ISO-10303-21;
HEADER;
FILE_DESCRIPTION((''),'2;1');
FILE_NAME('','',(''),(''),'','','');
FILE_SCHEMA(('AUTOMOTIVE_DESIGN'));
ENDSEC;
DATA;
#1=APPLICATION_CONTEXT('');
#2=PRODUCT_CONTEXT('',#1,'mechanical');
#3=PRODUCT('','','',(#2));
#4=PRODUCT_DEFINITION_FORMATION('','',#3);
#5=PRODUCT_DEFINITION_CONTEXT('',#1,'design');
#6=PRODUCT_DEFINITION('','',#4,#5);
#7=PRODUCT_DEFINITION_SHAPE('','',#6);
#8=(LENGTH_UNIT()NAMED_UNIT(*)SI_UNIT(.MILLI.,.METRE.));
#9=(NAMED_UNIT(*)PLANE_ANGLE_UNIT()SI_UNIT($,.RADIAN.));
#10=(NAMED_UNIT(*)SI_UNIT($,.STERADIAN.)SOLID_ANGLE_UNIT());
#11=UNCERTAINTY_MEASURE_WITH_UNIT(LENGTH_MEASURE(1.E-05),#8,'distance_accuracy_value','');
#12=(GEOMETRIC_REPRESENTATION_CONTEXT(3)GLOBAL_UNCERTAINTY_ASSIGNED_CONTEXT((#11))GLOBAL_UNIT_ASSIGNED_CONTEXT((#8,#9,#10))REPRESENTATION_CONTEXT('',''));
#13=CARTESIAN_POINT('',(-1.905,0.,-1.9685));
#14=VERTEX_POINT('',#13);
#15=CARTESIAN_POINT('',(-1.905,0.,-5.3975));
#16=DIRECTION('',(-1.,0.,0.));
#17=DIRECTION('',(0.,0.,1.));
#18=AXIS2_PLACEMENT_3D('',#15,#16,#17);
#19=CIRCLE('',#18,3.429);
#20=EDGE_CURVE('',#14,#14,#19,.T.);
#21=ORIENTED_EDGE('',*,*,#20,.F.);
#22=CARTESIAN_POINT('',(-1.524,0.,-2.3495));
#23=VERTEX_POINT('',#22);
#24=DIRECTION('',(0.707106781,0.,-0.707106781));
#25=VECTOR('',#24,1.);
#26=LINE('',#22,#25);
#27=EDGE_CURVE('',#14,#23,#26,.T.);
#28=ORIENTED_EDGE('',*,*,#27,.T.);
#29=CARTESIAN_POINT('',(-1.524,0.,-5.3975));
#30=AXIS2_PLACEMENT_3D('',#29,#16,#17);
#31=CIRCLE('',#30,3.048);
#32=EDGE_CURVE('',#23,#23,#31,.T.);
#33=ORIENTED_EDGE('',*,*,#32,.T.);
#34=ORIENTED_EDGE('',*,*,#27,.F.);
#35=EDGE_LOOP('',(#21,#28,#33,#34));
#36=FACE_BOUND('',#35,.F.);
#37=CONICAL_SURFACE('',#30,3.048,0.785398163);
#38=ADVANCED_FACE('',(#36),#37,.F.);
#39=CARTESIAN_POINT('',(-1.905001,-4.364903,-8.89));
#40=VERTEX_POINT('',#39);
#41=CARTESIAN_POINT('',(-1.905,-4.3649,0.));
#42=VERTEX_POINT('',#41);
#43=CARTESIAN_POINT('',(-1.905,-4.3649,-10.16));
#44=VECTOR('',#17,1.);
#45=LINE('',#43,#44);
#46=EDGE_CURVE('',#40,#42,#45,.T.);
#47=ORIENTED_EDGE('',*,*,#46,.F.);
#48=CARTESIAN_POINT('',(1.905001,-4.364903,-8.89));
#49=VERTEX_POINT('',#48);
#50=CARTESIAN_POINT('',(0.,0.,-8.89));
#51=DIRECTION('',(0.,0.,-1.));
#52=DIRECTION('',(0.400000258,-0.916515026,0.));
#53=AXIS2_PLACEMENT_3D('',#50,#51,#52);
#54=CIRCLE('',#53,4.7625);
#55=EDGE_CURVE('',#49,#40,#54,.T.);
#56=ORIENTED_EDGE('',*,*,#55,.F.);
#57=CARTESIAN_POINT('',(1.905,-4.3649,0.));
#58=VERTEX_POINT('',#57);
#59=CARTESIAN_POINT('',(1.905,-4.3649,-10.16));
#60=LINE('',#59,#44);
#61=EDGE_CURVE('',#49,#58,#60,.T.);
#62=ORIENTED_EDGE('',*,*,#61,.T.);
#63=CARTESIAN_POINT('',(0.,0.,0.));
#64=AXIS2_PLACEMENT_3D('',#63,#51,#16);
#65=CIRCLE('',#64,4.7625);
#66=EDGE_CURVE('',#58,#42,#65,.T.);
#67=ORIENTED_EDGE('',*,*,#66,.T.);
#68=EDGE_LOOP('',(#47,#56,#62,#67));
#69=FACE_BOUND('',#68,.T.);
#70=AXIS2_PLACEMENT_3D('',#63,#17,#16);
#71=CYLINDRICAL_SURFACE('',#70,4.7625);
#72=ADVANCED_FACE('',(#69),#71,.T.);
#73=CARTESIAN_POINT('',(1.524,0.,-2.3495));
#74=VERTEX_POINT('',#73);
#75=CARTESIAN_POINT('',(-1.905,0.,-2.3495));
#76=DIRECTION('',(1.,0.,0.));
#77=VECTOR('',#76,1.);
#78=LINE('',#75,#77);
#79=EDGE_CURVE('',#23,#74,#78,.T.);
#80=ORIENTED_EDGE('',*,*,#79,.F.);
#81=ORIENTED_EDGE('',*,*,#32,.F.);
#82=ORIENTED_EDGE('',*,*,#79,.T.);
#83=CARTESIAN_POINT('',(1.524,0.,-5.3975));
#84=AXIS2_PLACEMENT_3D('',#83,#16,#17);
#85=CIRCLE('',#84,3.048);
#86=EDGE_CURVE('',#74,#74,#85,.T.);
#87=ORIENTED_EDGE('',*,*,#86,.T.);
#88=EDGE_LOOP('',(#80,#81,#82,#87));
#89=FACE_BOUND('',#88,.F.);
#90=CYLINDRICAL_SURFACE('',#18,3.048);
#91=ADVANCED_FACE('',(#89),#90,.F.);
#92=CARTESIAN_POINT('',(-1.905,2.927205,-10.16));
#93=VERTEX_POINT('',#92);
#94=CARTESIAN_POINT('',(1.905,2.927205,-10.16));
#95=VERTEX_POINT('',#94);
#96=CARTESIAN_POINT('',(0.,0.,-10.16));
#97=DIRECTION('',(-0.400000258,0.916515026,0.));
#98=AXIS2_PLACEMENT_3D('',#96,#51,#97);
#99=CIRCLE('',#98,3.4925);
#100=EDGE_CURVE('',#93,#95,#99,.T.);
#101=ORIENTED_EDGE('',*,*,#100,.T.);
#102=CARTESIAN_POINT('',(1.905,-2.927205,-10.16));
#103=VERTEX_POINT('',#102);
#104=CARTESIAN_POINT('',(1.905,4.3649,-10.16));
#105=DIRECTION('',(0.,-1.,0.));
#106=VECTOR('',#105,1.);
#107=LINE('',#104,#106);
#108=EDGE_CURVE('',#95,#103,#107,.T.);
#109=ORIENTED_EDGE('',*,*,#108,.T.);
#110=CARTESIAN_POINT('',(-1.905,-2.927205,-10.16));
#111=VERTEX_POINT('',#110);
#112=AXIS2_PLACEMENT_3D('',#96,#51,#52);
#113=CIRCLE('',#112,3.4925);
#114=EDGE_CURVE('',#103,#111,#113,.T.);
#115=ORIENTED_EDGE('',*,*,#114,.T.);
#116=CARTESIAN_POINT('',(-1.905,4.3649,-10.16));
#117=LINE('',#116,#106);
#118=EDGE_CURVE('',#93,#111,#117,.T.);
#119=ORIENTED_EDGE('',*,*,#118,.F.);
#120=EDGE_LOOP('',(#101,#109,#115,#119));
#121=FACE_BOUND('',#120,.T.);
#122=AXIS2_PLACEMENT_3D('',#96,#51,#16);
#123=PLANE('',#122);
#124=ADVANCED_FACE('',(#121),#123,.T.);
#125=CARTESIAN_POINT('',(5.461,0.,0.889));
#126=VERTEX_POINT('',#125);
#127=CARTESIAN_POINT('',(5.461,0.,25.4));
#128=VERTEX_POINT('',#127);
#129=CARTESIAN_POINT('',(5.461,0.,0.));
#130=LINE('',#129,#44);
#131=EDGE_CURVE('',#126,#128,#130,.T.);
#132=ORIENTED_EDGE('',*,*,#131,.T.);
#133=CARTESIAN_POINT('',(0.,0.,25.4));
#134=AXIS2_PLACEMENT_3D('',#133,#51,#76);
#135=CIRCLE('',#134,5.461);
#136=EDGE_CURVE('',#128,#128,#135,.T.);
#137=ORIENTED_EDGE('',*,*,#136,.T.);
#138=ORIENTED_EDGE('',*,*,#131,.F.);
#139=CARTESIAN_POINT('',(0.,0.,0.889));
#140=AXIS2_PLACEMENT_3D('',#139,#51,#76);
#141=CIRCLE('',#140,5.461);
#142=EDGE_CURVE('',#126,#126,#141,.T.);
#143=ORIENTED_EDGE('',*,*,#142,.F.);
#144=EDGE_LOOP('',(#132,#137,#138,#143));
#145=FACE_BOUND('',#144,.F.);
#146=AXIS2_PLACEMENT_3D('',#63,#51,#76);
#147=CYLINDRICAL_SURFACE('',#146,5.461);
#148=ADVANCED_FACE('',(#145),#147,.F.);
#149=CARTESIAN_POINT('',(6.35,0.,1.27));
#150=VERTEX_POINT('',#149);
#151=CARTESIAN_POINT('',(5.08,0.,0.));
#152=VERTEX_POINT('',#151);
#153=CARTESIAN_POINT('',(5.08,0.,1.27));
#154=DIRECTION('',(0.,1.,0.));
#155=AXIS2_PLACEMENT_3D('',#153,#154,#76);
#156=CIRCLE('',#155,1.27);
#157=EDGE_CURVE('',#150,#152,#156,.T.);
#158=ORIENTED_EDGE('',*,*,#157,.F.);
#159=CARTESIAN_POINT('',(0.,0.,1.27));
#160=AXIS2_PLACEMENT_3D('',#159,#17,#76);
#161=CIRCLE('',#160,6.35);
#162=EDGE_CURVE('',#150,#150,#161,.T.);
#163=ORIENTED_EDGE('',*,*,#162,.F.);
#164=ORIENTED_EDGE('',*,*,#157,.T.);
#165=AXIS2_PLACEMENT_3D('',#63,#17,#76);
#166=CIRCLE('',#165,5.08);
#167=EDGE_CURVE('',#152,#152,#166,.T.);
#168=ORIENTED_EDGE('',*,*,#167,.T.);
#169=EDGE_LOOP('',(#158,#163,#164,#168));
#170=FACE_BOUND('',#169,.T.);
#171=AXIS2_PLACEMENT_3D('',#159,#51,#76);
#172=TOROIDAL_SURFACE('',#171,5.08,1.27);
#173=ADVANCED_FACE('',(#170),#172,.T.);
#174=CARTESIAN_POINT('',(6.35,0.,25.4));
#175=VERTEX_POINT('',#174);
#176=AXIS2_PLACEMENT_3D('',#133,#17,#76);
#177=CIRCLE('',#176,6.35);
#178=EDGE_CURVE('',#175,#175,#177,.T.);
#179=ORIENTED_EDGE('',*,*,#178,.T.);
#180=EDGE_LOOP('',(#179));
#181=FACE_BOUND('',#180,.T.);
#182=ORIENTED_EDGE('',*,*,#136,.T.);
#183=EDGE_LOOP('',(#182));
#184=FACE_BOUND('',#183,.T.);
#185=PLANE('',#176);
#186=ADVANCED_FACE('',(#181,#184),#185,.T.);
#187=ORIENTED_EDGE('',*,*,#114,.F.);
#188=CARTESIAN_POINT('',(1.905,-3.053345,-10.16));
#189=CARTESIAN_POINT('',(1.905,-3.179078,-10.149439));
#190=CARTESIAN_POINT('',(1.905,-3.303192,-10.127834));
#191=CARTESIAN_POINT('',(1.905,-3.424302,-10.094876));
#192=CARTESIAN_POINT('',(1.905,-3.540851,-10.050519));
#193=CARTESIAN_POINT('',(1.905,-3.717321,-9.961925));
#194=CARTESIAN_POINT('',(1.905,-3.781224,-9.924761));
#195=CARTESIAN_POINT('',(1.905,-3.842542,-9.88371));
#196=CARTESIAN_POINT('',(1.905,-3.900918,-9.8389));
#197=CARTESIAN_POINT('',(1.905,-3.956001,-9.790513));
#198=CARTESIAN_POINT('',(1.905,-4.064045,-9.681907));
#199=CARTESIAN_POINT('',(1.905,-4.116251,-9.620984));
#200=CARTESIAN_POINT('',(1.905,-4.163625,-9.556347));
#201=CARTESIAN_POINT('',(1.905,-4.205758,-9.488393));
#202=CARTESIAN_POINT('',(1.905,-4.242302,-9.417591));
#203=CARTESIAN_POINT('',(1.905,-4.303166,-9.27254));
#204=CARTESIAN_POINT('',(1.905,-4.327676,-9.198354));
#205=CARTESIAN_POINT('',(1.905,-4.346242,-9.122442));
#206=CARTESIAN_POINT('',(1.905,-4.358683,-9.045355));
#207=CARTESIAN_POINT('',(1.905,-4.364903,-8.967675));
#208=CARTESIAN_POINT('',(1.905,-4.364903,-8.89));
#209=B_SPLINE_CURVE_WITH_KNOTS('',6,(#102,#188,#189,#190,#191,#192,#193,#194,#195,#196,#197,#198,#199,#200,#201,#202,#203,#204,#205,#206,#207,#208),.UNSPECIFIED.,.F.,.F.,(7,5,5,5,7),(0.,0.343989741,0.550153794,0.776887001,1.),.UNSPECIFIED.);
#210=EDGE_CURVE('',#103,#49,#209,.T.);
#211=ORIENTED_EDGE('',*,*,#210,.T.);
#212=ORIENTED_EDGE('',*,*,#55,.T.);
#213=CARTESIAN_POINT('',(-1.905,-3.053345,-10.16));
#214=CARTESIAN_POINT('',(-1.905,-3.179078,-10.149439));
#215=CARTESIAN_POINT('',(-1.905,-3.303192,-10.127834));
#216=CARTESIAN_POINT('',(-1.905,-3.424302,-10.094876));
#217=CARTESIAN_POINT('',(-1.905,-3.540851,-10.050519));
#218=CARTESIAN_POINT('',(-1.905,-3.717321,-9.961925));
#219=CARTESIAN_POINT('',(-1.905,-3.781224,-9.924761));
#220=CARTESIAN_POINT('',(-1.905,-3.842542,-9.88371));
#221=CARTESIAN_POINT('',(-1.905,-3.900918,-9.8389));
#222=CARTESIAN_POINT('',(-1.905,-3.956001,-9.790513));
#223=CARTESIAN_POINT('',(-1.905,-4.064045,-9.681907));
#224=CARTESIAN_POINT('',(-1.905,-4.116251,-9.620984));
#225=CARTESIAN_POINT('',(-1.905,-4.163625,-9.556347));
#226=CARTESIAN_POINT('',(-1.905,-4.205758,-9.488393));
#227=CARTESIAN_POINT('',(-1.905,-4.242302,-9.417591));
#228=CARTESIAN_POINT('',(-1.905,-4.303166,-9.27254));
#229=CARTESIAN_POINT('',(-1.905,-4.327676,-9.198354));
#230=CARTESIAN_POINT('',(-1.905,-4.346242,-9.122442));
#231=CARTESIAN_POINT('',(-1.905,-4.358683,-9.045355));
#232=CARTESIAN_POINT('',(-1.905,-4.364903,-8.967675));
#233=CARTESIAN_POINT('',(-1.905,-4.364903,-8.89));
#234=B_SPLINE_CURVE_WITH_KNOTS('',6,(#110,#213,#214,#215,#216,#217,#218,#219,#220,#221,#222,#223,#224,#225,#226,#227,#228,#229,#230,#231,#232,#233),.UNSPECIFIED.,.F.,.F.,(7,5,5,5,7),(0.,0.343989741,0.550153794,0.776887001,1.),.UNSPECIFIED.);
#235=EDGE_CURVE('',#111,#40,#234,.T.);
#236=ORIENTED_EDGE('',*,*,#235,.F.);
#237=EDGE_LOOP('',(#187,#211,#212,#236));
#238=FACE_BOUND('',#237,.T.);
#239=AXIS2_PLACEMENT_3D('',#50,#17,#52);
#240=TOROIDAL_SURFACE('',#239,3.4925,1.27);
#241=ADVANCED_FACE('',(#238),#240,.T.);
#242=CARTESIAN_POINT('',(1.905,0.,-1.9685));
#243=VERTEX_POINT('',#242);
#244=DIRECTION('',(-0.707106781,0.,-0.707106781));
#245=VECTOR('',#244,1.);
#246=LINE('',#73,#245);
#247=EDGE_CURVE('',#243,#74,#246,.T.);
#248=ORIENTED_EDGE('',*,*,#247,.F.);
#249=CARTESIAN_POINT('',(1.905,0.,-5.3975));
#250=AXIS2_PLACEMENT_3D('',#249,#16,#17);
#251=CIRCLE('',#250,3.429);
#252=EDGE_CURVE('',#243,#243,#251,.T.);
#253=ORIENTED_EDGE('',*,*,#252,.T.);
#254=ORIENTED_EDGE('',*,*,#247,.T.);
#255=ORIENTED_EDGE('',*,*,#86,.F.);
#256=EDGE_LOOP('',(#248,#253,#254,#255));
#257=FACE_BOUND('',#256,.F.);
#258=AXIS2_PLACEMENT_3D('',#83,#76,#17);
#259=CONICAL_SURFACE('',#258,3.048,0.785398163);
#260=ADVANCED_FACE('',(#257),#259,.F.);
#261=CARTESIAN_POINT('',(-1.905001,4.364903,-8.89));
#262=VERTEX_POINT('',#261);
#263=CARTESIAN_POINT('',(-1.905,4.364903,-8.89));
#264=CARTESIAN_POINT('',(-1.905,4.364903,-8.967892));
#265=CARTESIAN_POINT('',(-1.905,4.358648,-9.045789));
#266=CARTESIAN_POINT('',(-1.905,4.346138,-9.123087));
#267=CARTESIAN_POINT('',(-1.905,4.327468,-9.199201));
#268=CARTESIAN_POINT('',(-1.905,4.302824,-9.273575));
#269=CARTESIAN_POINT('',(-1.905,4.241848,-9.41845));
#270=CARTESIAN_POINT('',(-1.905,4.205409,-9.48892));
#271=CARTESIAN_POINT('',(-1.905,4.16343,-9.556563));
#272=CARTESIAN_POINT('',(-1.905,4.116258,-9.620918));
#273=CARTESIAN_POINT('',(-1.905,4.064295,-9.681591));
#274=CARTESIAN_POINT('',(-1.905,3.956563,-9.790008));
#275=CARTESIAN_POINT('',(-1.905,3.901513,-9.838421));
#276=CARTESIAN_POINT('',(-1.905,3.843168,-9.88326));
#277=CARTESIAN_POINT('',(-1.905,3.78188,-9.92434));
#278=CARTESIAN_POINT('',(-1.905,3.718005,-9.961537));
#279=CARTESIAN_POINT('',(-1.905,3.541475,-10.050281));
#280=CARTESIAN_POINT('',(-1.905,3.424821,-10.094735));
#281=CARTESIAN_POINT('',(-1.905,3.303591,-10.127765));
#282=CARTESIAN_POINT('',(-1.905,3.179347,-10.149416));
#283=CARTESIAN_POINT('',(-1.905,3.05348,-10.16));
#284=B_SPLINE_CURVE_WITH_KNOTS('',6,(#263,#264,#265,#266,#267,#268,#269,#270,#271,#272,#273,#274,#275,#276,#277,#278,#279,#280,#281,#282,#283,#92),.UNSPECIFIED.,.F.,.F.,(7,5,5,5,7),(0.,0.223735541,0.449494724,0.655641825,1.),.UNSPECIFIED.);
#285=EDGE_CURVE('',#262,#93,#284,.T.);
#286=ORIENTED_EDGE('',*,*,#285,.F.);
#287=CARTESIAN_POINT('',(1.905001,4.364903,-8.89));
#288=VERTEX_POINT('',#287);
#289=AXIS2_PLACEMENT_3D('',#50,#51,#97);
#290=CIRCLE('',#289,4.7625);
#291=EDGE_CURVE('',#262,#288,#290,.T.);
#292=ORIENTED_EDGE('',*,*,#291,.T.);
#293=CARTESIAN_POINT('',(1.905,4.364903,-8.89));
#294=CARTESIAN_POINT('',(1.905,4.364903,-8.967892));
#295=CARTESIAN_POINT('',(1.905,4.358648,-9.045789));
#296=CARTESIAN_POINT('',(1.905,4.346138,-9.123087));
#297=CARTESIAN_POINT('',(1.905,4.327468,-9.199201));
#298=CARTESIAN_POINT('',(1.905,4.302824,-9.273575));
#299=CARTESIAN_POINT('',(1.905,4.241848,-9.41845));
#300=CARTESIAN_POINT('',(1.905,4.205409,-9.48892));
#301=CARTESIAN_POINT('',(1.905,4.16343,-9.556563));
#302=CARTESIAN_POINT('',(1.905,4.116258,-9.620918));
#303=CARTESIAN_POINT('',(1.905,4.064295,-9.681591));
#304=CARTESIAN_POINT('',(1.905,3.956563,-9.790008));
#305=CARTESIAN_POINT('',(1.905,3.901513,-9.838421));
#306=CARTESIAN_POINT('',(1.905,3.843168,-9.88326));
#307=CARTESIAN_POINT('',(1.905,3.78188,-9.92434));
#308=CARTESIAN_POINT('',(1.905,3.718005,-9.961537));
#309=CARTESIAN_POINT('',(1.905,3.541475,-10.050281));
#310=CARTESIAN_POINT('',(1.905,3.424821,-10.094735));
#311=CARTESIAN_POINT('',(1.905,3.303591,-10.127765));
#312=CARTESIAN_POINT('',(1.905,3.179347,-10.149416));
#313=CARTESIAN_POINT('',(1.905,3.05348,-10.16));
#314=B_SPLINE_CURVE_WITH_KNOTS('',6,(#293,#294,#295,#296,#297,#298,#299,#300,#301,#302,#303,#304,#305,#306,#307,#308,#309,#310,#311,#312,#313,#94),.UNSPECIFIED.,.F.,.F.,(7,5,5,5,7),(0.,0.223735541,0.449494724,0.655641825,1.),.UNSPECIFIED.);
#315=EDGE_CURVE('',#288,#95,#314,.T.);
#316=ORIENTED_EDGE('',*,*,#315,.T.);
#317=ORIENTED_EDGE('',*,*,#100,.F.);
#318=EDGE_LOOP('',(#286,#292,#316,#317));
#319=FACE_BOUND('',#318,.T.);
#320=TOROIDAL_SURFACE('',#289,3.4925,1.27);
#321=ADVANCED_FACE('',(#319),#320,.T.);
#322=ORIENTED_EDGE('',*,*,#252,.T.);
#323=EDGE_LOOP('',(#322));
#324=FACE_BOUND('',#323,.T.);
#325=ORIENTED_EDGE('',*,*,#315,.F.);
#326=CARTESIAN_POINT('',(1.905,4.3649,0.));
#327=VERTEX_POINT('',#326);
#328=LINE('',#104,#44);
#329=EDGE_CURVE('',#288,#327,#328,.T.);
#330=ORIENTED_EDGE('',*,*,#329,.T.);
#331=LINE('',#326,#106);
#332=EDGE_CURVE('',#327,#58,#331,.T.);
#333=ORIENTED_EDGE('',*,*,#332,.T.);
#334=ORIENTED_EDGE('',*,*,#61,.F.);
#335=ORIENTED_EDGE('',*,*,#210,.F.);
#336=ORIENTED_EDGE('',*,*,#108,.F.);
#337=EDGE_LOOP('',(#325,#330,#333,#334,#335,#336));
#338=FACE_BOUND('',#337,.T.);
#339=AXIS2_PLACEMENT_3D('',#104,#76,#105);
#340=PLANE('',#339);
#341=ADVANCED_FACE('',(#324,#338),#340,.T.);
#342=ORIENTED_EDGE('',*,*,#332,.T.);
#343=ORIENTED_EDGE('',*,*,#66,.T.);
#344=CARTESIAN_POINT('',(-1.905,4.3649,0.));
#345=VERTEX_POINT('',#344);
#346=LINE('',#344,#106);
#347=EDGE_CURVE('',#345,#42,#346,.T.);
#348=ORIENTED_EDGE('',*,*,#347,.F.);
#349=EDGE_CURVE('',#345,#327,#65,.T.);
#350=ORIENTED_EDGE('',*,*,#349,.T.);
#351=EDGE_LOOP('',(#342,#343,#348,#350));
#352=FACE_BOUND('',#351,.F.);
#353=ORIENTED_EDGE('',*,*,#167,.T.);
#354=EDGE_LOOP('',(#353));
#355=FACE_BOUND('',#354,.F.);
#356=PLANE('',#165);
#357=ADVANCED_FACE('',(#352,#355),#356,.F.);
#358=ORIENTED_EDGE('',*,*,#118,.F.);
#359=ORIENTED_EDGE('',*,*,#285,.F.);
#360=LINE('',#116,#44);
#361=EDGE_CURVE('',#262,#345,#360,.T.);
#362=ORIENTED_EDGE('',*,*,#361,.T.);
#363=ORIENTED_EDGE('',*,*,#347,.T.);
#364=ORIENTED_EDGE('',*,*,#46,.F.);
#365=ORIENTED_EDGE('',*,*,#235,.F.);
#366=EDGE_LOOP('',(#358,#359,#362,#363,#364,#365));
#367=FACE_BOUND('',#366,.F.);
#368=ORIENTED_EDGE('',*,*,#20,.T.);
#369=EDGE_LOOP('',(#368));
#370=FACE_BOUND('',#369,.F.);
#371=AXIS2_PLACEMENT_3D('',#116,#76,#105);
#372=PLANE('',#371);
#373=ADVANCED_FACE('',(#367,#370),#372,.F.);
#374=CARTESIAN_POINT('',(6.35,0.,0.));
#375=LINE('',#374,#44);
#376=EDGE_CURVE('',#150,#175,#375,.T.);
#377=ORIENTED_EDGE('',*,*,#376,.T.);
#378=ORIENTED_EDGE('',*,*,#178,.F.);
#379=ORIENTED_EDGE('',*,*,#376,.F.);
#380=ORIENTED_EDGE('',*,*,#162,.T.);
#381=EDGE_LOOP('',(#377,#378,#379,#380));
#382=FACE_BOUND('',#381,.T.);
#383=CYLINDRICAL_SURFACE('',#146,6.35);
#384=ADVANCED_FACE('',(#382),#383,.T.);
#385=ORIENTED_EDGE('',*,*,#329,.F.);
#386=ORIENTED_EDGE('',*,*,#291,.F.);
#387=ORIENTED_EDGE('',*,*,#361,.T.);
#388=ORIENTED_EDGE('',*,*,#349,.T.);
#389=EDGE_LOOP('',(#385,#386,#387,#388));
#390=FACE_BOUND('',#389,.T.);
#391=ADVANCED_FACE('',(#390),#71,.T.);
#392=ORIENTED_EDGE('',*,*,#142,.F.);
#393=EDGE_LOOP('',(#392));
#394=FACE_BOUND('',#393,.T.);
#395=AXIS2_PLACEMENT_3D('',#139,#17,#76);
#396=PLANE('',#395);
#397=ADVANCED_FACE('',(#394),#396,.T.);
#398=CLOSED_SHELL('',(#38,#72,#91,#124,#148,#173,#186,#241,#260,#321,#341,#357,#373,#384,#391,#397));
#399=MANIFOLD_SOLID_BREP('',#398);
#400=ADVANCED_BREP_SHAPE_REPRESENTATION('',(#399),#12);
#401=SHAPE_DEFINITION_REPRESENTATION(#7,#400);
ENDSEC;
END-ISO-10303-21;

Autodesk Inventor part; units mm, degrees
ref_plane "YZ Plane" through (0, 0, 0) normal (1, 0, 0) x (0, 1, 0)
ref_plane "XZ Plane" through (0, 0, 0) normal (0, 1, 0) x (-1, 0, 0)
ref_plane "XY Plane" through (0, 0, 0) normal (0, 0, 1) x (1, 0, 0)
sketch "Sketch1" plane through (0, 0, 0) normal (0, 0, 1) x (1, 0, 0)
  circle A0 centre (0, 0) radius 6.35
  dimension "d0" = 12.7
extrude "Extrusion1" add sketch "Sketch1" along normal blind 25.4
shell "Shell1" thickness 0.889 removed faces 1 at (-1.8127, -0.4771, 25.4)
fillet "Fillet1" radius 1.27 1 edges at (-6.35, 0, 0)
sketch "Sketch2" plane through (0, 0, 0) normal (0, 0, -1) x (-1, 0, 0)
  circle A0 centre (0, 0) radius 4.7625
  dimension "d5" = 9.525
extrude "Extrusion2" add sketch "Sketch2" along normal blind 10.16
sketch "Sketch3" plane through (0, 0, -10.16) normal (0, 0, -1) x (-1, 0, 0)
  circle A0 centre (0, 0) radius 4.7625 projected
  circle A1 centre (0, 0) radius 4.7625 projected
  line L0 (-1.905, 4.3649) -> (-1.905, -4.3649)
  line L1 (1.905, 4.3649) -> (1.905, -4.3649)
  line L2 (0, -8.89) -> (0, 8.89) construction
  line L3 (8.89, 0) -> (-8.89, 0) construction
  circle A2 centre (0, 0) radius 4.7625 projected
  circle A3 centre (0, 0) radius 4.7625
  line L4 (-1.905, -4.3649) -> (-1.905, 4.3649)
  line L5 (1.905, 4.3649) -> (1.905, -4.3649)
  dimension "d8" = 3.81
extrude "Extrusion3" cut sketch "Sketch3" against normal up to surface (10.16 mm away) contours A0 L1 | L0 A0
sketch "Sketch4" plane through (-1.905, -4.3649, -10.16) normal (-1, 0, 0) x (0, 0, 1)
  line L0 (-7.112, 4.3649) -> (42.672, 4.3649) projected
  line L1 (0, 0) -> (0, 8.7298) projected
  circle A0 centre (4.7625, 4.3649) radius 3.048
  point P0 (10.16, 4.3649)
  dimension "d11" = 6.096
  dimension "d12" = 4.7625
extrude "Extrusion4" cut sketch "Sketch4" along normal through all both and the other way through all
chamfer "Chamfer1" distance 0.381 angle 45 2 edges at (1.905, 0, -8.4455) (-1.905, 0, -8.4455)
fillet "Fillet2" radius 1.27 2 edges at (0, -4.7625, -10.16) (0, 4.7625, -10.16)
thread "Thread1" size "1/2-20 UNF" class "1A" standard "ANSI Unified Screw Threads" length 19.05
thread "Thread2" size "7/16-28 UNEF" class "2B" standard "ANSI Unified Screw Threads" length 9.525
properties part number "Shock Body 1.3 Length"
